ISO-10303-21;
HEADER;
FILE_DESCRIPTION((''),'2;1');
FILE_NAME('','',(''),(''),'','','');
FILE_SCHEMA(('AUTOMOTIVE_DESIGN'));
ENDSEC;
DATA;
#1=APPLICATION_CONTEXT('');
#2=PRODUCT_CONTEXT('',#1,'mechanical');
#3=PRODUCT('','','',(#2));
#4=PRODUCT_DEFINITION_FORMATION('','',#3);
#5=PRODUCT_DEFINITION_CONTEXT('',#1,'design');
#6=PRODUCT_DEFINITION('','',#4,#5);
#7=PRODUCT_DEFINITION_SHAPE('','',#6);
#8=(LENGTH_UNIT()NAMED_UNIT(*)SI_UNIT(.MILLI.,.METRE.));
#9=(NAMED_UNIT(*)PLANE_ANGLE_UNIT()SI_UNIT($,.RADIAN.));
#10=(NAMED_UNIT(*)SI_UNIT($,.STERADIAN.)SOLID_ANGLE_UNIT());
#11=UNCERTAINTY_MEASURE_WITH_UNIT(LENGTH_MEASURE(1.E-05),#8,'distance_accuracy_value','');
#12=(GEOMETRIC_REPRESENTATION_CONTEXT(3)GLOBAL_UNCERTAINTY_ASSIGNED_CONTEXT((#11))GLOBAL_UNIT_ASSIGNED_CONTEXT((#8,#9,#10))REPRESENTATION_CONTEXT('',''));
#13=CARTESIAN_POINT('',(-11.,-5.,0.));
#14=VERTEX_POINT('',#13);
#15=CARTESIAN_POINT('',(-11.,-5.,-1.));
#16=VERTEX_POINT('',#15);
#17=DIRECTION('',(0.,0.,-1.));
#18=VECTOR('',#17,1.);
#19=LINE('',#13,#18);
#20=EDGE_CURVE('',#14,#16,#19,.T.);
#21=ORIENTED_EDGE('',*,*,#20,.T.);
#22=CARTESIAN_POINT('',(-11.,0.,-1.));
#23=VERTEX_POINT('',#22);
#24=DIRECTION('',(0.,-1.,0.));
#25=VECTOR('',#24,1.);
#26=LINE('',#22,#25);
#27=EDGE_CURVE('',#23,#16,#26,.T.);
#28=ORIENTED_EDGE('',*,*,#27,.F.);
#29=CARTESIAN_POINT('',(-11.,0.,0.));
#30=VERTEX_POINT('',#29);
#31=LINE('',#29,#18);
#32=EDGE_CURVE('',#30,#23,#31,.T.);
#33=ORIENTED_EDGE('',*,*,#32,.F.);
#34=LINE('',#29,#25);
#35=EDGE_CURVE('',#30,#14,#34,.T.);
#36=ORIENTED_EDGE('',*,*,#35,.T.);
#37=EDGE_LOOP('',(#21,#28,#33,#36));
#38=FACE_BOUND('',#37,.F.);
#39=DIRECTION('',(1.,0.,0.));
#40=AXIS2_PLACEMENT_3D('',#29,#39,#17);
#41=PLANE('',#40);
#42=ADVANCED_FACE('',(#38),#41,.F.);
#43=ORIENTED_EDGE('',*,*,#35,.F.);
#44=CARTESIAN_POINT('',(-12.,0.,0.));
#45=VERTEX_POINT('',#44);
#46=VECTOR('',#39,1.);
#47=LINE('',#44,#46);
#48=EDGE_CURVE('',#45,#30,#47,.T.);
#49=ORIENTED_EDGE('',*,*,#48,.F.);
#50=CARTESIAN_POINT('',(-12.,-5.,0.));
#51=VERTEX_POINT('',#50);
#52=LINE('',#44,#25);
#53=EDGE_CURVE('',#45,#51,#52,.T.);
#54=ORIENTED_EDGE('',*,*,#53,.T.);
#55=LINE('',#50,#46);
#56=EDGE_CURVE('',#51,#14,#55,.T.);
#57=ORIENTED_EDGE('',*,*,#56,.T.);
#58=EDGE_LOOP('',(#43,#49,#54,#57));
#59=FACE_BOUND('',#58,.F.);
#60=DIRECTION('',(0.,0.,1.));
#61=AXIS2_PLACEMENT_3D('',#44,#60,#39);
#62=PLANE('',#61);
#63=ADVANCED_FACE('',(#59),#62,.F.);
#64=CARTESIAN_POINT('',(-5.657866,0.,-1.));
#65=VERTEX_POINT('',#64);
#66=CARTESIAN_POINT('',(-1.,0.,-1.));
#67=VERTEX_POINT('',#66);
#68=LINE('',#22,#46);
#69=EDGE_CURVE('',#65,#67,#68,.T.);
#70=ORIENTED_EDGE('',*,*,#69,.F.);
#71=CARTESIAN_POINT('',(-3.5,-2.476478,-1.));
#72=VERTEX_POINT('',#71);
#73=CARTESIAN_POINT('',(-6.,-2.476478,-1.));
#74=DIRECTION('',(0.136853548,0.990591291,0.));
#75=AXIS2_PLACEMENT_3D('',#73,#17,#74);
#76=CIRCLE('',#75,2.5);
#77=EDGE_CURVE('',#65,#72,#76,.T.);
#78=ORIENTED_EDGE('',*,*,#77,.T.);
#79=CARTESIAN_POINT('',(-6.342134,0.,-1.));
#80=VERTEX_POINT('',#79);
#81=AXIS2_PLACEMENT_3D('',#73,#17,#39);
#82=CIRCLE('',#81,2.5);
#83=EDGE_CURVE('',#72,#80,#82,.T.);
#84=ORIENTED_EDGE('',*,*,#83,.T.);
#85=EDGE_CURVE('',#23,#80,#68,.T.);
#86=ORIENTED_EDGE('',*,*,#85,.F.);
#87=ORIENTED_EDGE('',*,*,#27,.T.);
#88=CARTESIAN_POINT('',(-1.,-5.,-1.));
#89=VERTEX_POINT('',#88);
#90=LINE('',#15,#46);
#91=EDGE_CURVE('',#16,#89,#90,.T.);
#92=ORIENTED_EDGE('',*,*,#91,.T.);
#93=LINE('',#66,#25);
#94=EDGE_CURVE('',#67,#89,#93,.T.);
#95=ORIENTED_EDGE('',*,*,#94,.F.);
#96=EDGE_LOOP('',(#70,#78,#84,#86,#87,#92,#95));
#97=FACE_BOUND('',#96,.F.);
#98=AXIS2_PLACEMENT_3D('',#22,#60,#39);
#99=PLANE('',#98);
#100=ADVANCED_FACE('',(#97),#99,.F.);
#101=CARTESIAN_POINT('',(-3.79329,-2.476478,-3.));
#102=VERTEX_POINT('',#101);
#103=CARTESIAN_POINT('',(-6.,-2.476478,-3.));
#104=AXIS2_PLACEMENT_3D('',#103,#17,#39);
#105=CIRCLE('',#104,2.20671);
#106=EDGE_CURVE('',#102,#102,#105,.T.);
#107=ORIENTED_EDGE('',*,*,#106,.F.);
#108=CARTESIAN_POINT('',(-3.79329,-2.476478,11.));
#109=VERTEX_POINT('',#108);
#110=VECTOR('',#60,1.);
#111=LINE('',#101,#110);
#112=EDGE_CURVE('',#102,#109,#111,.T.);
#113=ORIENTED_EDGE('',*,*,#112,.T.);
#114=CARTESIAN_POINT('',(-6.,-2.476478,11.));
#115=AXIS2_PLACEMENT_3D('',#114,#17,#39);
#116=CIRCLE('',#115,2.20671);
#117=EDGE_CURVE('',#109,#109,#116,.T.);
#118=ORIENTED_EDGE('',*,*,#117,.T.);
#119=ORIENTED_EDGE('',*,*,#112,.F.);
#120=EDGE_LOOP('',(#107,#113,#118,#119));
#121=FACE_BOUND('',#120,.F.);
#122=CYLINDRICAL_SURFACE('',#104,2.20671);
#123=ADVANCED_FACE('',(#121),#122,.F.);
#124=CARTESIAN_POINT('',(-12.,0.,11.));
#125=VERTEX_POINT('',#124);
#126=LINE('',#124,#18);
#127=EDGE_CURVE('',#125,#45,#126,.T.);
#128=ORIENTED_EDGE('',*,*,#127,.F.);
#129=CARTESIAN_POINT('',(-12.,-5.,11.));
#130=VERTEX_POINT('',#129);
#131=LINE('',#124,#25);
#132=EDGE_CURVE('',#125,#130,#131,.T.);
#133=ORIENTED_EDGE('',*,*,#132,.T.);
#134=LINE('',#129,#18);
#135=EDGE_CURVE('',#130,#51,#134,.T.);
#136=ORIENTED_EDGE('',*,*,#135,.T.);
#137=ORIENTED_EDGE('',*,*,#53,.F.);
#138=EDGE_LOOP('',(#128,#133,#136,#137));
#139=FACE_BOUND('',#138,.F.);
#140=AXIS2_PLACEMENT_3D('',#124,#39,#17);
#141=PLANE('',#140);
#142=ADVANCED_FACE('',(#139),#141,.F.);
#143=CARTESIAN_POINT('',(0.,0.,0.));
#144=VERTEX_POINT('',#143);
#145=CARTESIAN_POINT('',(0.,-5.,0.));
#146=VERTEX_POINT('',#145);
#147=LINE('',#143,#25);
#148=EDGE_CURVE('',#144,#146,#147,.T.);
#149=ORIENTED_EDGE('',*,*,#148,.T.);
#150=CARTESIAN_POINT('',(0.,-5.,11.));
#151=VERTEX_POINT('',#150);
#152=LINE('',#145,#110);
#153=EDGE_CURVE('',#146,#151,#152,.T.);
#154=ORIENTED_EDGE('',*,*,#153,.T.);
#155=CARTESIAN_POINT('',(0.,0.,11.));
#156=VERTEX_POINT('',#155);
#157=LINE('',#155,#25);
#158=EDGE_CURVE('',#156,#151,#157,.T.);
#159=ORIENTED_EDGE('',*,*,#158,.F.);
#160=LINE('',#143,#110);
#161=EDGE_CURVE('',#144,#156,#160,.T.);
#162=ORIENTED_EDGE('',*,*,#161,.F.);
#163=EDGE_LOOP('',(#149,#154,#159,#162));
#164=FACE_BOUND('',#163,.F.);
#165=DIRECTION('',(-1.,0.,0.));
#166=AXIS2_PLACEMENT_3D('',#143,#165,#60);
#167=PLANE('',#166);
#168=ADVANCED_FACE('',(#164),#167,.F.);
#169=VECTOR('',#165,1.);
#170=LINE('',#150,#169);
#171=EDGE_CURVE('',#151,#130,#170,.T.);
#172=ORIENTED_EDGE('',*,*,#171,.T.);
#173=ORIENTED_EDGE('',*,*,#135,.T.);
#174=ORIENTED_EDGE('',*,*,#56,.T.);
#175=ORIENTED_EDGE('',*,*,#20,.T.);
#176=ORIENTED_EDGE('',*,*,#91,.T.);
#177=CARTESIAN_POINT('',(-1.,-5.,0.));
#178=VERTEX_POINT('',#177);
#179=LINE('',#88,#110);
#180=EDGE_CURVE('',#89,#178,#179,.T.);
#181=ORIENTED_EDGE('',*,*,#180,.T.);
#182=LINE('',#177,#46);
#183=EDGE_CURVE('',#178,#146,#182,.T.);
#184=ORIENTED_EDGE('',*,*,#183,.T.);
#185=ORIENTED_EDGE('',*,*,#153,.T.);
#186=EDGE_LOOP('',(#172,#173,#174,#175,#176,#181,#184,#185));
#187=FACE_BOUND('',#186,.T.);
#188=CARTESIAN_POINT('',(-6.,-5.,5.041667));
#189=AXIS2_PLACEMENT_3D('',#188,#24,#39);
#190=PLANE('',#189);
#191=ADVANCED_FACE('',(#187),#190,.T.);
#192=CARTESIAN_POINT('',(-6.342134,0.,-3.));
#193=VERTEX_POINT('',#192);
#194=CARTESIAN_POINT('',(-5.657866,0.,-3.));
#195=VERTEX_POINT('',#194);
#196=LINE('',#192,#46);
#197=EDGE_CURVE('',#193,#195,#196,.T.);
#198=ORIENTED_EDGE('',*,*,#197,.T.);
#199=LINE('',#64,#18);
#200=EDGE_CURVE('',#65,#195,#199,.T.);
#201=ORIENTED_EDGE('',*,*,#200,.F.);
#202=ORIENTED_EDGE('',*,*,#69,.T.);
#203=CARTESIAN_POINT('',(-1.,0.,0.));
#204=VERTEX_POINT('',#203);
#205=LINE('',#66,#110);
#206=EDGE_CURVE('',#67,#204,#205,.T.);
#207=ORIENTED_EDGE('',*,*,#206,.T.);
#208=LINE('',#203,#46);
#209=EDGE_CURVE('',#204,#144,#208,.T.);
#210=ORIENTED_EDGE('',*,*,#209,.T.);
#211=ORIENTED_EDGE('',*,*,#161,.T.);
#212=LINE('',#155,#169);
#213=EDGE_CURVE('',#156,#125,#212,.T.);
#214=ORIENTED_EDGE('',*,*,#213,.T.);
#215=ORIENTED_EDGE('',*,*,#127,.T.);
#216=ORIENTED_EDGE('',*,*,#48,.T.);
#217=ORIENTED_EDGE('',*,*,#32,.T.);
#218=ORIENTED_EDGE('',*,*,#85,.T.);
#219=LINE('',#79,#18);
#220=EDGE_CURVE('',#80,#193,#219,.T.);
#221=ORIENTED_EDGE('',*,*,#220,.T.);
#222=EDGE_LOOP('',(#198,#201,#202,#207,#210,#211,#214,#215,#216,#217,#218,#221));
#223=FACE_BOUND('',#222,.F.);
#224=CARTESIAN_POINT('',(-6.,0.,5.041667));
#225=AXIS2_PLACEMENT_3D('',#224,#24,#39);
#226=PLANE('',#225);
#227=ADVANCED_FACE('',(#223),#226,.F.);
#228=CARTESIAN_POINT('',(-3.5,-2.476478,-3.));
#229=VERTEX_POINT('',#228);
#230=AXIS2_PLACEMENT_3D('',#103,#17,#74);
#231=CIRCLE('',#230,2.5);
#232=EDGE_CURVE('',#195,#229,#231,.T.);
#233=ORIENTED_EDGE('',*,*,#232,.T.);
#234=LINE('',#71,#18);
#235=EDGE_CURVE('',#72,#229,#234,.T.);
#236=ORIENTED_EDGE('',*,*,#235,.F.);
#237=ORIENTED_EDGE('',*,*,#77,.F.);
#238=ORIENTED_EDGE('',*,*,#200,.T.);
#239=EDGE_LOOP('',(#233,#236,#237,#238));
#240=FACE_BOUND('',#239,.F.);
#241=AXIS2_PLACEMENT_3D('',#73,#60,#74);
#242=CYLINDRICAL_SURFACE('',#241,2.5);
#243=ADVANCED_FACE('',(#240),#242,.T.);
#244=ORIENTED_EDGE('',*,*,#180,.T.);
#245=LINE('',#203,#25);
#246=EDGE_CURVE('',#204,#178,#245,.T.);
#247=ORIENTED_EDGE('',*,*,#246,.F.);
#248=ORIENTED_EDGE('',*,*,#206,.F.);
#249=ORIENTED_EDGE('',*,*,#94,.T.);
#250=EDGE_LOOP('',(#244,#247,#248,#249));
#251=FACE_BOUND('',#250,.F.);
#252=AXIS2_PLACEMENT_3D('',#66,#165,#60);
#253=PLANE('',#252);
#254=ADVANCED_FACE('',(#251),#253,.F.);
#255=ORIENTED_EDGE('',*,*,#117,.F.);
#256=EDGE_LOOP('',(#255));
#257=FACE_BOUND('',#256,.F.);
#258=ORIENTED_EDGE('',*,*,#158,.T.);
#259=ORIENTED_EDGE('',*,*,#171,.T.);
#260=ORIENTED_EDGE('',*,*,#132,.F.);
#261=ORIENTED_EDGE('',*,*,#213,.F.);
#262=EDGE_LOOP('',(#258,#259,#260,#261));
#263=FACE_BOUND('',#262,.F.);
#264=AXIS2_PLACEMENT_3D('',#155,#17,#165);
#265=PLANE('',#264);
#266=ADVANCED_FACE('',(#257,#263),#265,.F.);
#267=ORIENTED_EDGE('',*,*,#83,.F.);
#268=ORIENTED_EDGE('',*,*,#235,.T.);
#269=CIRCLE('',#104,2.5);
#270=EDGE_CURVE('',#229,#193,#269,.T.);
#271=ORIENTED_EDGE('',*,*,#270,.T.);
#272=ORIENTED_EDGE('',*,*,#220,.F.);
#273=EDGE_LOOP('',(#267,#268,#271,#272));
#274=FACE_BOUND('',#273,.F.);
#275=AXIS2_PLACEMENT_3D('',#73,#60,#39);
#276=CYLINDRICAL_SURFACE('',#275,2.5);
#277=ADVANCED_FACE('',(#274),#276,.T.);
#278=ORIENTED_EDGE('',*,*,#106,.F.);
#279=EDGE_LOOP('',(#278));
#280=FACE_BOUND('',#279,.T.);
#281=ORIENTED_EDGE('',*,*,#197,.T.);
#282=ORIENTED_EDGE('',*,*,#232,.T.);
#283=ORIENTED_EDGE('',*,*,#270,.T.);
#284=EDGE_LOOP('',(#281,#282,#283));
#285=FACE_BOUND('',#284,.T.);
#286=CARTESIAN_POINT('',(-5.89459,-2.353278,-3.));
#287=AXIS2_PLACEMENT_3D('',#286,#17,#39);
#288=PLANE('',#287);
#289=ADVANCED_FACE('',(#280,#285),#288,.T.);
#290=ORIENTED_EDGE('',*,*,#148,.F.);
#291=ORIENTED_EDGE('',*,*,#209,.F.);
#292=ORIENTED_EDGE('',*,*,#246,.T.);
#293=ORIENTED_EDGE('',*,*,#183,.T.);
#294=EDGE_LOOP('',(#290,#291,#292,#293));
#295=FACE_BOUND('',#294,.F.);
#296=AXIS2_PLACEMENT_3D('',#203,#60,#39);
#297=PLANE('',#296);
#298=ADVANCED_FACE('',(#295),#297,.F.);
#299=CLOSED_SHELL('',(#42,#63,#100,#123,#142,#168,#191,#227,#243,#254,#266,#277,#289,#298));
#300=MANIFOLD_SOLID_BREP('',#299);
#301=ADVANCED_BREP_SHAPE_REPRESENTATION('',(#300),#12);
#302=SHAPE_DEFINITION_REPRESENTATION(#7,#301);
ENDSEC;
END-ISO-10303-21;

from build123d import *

# Parameters (mm, degrees)
F1_DEPTH = 5
F3_DEPTH = 2
F4_R     = 2.20671025
F5_DEPTH = 25


with BuildPart() as f1:
    # F0 (on Front) → F1 (new body)
    with BuildSketch(Plane.XZ):
        Polygon((0, 11), (-12, 11), (-12, 0), (-11, 0), (-11, -1), (-1, -1), (-1, 0), (0, 0), align=None)
    extrude(amount=F1_DEPTH)

    # F2 (on face) → F3 (join)
    with BuildSketch(Plane(origin=(0, 0, -1), x_dir=(1, 0, 0), z_dir=(0, 0, -1))):
        with BuildLine():
            ThreePointArc((-5.6578661307, 0), (-4.1151479271, 0.8341224011), (-3.5, 2.4764782283))
            ThreePointArc((-3.5, 2.4764782283), (-7.6423558273, 4.3613303012), (-6.3421338693, 0))
            Line((-6.3421338693, 0), (-5.6578661307, 0))
        make_face()
    extrude(amount=F3_DEPTH)

    # F4 (on face) → F5 (cut)
    with BuildSketch(Plane(origin=(0, 0, -3), x_dir=(1, 0, 0), z_dir=(0, 0, -1))):
        with Locations((-6, 2.4764782283)):
            Circle(F4_R)
    extrude(amount=-F5_DEPTH, mode=Mode.SUBTRACT)


solid = f1.part
